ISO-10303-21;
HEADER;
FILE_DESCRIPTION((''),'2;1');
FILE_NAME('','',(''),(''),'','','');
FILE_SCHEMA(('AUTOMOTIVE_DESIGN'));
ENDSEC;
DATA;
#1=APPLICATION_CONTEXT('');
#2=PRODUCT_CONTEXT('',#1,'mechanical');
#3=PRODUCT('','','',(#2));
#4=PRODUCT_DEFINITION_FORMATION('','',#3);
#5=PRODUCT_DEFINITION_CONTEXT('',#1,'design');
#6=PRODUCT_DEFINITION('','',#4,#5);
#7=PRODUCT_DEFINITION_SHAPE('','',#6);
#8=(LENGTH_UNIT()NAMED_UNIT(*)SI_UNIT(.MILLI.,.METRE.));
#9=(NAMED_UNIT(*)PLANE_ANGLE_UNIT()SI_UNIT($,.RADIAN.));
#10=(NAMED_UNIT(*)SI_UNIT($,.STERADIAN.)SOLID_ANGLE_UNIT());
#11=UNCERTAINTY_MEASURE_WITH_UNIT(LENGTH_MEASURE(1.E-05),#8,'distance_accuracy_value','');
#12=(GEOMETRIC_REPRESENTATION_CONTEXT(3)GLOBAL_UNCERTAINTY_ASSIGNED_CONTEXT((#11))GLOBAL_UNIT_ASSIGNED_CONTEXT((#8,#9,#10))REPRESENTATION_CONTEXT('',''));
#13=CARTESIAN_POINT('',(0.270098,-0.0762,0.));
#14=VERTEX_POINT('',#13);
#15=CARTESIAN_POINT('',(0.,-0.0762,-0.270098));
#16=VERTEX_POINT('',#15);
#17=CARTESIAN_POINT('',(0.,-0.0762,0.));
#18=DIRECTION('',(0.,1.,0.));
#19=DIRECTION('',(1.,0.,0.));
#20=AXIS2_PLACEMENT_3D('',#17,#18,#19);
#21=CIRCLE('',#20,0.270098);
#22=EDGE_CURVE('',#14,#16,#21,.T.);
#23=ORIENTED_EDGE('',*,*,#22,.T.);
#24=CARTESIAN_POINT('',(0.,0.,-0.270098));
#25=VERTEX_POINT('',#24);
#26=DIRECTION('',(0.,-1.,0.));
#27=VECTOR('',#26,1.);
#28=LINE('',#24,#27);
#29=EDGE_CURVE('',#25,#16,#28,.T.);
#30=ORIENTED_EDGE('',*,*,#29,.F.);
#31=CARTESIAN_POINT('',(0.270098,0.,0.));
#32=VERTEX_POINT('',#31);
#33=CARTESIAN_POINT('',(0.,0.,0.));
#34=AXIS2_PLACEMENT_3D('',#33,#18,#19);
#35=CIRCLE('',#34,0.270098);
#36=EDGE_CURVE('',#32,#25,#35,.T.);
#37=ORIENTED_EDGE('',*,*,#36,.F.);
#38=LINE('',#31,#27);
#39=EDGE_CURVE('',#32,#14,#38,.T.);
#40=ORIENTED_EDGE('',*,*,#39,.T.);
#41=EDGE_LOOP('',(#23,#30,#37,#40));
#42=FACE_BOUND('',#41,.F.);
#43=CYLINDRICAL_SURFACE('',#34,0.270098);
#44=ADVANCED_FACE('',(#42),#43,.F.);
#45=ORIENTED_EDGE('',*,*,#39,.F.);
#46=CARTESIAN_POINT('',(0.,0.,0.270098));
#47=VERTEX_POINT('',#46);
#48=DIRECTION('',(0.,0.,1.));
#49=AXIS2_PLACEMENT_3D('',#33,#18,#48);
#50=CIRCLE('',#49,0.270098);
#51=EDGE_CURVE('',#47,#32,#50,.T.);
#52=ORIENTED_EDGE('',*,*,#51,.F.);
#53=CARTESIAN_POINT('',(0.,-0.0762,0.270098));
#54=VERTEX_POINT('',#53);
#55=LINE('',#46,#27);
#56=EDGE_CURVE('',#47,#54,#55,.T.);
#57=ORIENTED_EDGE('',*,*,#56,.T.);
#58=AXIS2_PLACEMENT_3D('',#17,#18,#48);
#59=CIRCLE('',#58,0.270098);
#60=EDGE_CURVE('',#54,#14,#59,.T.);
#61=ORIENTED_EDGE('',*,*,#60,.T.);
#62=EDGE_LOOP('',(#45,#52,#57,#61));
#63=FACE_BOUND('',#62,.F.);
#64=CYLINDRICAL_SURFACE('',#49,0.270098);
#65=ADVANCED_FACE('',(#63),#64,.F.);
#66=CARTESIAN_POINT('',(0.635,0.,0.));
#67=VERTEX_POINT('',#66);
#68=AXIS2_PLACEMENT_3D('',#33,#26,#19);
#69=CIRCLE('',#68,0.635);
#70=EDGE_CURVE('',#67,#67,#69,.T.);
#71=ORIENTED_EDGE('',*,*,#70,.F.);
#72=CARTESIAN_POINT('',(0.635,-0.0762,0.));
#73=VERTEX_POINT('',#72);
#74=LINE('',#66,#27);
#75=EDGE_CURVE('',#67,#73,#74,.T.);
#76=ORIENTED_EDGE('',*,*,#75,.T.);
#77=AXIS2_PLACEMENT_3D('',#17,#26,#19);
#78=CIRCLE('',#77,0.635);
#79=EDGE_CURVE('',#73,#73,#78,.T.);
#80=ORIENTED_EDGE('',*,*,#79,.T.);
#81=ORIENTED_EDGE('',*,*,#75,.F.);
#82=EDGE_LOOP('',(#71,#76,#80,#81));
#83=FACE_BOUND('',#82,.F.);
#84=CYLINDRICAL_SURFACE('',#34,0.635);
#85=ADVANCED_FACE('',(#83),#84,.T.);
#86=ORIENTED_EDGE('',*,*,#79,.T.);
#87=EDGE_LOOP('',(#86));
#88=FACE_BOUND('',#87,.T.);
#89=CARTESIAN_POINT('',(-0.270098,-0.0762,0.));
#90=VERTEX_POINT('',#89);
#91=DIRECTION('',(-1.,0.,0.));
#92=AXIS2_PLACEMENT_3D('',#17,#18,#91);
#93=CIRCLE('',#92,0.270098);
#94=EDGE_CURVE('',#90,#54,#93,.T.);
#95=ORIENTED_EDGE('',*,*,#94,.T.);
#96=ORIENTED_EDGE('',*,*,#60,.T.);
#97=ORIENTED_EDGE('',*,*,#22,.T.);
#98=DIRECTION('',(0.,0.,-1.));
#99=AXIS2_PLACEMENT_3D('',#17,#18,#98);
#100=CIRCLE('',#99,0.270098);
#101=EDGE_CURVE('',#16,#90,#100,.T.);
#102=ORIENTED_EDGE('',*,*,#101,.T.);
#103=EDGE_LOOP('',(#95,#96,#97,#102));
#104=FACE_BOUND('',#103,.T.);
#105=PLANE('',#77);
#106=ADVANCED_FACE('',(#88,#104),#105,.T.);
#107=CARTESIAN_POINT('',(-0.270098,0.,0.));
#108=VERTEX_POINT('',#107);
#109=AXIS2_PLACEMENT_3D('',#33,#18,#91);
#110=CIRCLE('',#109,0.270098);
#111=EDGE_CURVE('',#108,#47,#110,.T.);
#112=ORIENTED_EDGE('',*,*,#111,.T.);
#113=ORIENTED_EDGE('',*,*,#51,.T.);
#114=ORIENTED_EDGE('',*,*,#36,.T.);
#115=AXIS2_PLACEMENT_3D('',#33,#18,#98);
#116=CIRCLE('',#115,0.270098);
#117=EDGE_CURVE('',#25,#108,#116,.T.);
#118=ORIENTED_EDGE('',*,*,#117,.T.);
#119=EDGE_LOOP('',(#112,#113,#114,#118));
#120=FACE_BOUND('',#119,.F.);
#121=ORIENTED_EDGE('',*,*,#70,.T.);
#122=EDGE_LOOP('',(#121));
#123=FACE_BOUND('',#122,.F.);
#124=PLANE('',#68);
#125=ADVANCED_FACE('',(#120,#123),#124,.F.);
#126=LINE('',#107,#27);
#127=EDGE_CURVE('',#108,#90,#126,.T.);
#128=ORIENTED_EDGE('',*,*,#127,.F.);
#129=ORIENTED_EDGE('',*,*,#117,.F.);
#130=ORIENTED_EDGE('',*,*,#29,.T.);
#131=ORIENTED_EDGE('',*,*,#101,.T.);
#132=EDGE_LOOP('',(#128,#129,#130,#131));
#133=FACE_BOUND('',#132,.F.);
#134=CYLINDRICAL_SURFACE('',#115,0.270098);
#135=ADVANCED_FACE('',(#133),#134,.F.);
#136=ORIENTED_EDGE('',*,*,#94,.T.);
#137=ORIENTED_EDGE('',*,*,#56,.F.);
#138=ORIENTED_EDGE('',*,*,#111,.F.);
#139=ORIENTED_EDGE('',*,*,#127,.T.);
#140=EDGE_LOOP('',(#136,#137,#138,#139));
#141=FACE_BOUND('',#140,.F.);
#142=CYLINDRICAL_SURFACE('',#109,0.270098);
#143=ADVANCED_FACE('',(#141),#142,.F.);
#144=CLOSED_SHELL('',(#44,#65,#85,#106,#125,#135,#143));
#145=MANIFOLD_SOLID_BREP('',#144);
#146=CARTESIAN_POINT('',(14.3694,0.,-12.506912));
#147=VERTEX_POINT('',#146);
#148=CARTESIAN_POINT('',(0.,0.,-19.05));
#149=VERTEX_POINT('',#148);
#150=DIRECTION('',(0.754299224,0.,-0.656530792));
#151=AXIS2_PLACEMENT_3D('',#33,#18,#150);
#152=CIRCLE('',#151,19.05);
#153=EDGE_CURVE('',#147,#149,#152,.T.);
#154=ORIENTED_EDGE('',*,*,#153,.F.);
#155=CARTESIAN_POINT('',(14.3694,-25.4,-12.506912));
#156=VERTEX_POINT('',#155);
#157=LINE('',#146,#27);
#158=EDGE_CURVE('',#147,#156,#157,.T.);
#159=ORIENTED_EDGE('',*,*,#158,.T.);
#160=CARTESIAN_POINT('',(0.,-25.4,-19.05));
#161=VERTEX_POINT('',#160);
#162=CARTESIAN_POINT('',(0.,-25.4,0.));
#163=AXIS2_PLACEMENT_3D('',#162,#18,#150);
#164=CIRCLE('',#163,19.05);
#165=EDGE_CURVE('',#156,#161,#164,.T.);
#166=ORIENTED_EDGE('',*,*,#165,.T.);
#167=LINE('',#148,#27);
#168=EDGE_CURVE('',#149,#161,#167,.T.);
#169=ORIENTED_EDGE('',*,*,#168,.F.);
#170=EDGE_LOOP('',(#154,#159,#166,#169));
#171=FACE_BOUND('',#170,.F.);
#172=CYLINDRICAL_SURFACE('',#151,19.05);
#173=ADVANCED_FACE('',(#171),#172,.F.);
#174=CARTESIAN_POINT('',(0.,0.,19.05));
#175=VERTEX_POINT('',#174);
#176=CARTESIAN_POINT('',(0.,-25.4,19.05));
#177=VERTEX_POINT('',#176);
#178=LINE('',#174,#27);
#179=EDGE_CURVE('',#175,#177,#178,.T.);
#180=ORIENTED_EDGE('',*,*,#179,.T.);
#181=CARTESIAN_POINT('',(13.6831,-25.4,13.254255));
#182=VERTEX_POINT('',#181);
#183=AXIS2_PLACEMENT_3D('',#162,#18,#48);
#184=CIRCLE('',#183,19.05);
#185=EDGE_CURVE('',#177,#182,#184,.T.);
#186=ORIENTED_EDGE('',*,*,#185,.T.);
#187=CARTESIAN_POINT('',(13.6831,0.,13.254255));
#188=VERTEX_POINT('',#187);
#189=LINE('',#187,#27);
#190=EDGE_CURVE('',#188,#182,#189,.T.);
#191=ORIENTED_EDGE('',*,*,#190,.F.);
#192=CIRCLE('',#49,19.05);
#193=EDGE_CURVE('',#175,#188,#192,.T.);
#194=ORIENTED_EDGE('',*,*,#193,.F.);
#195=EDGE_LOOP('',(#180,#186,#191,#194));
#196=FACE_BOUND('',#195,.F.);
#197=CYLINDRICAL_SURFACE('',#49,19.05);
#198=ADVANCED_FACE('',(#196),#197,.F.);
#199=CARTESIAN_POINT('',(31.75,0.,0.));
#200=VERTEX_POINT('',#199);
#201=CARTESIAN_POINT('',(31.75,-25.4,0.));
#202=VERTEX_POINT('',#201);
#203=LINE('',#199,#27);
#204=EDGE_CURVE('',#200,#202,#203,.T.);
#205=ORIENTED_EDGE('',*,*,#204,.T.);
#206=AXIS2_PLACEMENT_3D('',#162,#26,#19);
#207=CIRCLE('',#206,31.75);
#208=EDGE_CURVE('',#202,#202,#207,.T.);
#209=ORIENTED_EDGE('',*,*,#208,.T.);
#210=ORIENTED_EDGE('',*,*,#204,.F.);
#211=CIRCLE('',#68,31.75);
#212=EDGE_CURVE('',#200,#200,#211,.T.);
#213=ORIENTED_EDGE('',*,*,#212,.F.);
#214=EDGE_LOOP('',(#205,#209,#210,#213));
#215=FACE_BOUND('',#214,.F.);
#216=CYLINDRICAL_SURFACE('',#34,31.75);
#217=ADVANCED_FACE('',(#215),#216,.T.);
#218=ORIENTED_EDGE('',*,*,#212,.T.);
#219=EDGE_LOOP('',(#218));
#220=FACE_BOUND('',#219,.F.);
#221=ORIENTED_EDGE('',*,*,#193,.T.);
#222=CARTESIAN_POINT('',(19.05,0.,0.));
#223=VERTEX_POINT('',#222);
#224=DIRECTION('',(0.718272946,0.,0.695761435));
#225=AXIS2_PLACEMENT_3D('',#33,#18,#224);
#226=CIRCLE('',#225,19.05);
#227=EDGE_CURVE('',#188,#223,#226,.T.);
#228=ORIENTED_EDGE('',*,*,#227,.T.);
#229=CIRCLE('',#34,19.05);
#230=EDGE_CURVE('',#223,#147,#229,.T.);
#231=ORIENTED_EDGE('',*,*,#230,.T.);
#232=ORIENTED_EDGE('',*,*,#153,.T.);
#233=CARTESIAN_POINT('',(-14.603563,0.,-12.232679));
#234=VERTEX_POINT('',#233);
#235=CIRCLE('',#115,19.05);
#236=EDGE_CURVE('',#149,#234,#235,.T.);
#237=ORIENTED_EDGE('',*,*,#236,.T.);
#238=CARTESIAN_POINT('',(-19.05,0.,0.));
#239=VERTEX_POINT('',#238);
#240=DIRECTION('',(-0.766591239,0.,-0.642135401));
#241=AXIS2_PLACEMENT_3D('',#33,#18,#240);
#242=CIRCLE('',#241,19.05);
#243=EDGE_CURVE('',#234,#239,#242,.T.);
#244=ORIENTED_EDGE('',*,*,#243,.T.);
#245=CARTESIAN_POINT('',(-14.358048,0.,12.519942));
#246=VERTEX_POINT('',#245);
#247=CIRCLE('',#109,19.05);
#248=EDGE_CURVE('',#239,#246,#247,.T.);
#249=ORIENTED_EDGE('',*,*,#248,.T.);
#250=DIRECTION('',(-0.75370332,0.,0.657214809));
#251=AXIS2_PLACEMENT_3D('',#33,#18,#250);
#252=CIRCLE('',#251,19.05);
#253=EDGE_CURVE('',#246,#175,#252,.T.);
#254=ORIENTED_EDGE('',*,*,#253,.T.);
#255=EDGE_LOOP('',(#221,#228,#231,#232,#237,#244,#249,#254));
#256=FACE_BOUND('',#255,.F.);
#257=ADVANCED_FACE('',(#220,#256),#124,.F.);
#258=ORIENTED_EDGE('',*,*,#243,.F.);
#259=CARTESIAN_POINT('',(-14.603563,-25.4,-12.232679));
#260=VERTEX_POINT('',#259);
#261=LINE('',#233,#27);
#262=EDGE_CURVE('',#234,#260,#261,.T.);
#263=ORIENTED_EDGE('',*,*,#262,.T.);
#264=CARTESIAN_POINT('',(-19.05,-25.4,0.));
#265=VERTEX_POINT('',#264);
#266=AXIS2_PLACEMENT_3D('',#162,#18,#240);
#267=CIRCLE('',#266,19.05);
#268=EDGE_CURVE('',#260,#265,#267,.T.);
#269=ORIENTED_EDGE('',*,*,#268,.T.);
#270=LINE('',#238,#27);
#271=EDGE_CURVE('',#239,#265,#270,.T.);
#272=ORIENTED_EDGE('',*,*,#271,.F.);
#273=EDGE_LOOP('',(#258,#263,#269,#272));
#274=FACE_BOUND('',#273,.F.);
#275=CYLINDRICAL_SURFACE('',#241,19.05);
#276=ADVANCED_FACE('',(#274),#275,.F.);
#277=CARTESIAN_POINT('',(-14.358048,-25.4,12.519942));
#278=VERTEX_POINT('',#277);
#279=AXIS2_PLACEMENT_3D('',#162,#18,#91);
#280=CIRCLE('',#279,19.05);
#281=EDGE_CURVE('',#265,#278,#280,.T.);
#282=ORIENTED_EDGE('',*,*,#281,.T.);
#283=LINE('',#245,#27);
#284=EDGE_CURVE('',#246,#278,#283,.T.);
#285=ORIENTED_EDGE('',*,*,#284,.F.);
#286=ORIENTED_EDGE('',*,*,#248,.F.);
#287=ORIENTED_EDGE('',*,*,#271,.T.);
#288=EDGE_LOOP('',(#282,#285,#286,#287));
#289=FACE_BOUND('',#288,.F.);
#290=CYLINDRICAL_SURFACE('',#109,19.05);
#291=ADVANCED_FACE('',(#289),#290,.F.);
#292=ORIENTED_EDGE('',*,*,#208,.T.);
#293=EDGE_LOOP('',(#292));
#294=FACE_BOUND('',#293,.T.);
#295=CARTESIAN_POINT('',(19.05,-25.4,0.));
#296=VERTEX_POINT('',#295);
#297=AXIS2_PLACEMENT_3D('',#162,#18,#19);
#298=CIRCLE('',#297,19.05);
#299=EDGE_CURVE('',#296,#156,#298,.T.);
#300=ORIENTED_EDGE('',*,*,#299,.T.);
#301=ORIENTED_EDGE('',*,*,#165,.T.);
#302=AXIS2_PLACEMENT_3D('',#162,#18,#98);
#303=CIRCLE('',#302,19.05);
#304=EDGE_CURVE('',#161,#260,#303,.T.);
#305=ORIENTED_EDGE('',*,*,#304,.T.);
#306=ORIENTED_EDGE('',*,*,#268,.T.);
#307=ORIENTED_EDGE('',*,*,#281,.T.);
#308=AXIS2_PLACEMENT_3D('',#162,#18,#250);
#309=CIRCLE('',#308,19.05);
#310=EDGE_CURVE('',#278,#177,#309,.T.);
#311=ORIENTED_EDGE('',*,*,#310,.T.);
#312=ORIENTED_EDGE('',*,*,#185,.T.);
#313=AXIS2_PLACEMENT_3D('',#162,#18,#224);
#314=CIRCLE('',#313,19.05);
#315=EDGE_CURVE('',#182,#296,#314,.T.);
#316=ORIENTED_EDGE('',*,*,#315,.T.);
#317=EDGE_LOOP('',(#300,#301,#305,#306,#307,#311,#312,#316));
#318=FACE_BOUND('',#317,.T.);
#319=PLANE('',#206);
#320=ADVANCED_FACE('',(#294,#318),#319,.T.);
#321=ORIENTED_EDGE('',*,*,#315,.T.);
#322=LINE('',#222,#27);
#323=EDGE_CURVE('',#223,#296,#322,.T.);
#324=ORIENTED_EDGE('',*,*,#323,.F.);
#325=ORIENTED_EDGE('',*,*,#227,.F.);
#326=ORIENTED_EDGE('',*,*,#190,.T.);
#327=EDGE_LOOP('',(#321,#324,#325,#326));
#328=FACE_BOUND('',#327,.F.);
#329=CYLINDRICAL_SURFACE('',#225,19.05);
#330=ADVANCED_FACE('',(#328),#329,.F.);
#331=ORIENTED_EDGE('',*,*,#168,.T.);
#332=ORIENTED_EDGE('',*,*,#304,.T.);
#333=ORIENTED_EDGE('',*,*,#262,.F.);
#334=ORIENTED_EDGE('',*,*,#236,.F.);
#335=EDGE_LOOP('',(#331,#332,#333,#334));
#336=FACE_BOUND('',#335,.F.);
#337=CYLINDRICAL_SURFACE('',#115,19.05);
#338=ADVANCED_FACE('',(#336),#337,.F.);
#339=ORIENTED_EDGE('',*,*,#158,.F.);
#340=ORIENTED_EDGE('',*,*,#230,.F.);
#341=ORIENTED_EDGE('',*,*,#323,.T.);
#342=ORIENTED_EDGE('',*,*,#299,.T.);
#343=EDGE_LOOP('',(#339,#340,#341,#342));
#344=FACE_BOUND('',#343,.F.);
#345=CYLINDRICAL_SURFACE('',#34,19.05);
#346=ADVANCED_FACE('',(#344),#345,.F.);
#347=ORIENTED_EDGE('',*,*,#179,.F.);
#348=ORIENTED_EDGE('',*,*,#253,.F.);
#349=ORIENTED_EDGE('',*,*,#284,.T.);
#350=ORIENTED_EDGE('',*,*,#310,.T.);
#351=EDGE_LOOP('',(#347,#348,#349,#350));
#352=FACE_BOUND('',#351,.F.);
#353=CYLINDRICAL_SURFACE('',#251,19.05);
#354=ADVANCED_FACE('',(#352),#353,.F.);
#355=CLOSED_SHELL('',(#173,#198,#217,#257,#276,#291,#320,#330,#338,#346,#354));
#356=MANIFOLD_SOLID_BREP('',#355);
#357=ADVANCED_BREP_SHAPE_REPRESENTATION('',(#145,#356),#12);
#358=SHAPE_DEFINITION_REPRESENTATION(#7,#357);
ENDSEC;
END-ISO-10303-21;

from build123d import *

# Parameters (mm, degrees)
F0_R     = 0.635
F1_DEPTH = 0.0762
F2_R     = 31.75
F4_DEPTH = 25.4
F5_DEPTH = 25.4
F6_DEPTH = 25.4


# Not quite as in the source:
# - a feature of the source that left no trace in its solid (it failed there, or was rolled back) is left out


with BuildPart() as f1:
    # F0 (on Front) → F1 (new body)
    with BuildSketch(Plane.XZ):
        Circle(F0_R)
        with BuildLine():
            ThreePointArc((0, 0.2700978897), (0.1909880494, 0.1909880494), (0.2700978897, 0))
            ThreePointArc((0.2700978897, 0), (0.1909880494, -0.1909880494), (0, -0.2700978897))
            ThreePointArc((0, -0.2700978897), (-0.1909880494, -0.1909880494), (-0.2700978897, 0))
            ThreePointArc((-0.2700978897, 0), (-0.1909880494, 0.1909880494), (0, 0.2700978897))
        make_face(mode=Mode.SUBTRACT)
    extrude(amount=F1_DEPTH)


with BuildPart() as f4:
    # F2 (on Front) → F4 (new body)
    with BuildSketch(Plane.XZ):
        Circle(F2_R)
        with BuildLine():
            ThreePointArc((13.6830996254, 13.2542553409), (17.6573716598, 7.1498060161), (19.05, 0))
            ThreePointArc((19.05, 0), (17.8415186316, -6.6770287492), (14.3694002186, -12.5069115835))
            ThreePointArc((14.3694002186, -12.5069115835), (7.8944865043, -17.3372311178), (0, -19.05))
            ThreePointArc((0, -19.05), (-8.0582243019, -17.2617357499), (-14.6035630984, -12.2326793807))
            ThreePointArc((-14.6035630984, -12.2326793807), (-17.903915452, -6.5078653557), (-19.05, 0))
            ThreePointArc((-19.05, 0), (-17.8384881524, 6.6851208244), (-14.358048248, 12.5199421128))
            ThreePointArc((-14.358048248, 12.5199421128), (-7.8866216706, 17.3408102067), (0, 19.05))
            ThreePointArc((0, 19.05), (7.4299709204, 17.5413235567), (13.6830996254, 13.2542553409))
        make_face(mode=Mode.SUBTRACT)
    extrude(amount=F4_DEPTH)

    # F2 (on Front) → F5 (join)
    with BuildSketch(Plane.XZ):
        Circle(F2_R)
        with BuildLine():
            ThreePointArc((13.6830996254, 13.2542553409), (17.6573716598, 7.1498060161), (19.05, 0))
            ThreePointArc((19.05, 0), (17.8415186316, -6.6770287492), (14.3694002186, -12.5069115835))
            ThreePointArc((14.3694002186, -12.5069115835), (7.8944865043, -17.3372311178), (0, -19.05))
            ThreePointArc((0, -19.05), (-8.0582243019, -17.2617357499), (-14.6035630984, -12.2326793807))
            ThreePointArc((-14.6035630984, -12.2326793807), (-17.903915452, -6.5078653557), (-19.05, 0))
            ThreePointArc((-19.05, 0), (-17.8384881524, 6.6851208244), (-14.358048248, 12.5199421128))
            ThreePointArc((-14.358048248, 12.5199421128), (-7.8866216706, 17.3408102067), (0, 19.05))
            ThreePointArc((0, 19.05), (7.4299709204, 17.5413235567), (13.6830996254, 13.2542553409))
        make_face(mode=Mode.SUBTRACT)
    extrude(amount=F5_DEPTH)

    # F2 (on Front) → F6 (join)
    with BuildSketch(Plane.XZ):
        Circle(F2_R)
        with BuildLine():
            ThreePointArc((13.6830996254, 13.2542553409), (17.6573716598, 7.1498060161), (19.05, 0))
            ThreePointArc((19.05, 0), (17.8415186316, -6.6770287492), (14.3694002186, -12.5069115835))
            ThreePointArc((14.3694002186, -12.5069115835), (7.8944865043, -17.3372311178), (0, -19.05))
            ThreePointArc((0, -19.05), (-8.0582243019, -17.2617357499), (-14.6035630984, -12.2326793807))
            ThreePointArc((-14.6035630984, -12.2326793807), (-17.903915452, -6.5078653557), (-19.05, 0))
            ThreePointArc((-19.05, 0), (-17.8384881524, 6.6851208244), (-14.358048248, 12.5199421128))
            ThreePointArc((-14.358048248, 12.5199421128), (-7.8866216706, 17.3408102067), (0, 19.05))
            ThreePointArc((0, 19.05), (7.4299709204, 17.5413235567), (13.6830996254, 13.2542553409))
        make_face(mode=Mode.SUBTRACT)
    extrude(amount=F6_DEPTH)


solid = Compound([f1.part, f4.part])
